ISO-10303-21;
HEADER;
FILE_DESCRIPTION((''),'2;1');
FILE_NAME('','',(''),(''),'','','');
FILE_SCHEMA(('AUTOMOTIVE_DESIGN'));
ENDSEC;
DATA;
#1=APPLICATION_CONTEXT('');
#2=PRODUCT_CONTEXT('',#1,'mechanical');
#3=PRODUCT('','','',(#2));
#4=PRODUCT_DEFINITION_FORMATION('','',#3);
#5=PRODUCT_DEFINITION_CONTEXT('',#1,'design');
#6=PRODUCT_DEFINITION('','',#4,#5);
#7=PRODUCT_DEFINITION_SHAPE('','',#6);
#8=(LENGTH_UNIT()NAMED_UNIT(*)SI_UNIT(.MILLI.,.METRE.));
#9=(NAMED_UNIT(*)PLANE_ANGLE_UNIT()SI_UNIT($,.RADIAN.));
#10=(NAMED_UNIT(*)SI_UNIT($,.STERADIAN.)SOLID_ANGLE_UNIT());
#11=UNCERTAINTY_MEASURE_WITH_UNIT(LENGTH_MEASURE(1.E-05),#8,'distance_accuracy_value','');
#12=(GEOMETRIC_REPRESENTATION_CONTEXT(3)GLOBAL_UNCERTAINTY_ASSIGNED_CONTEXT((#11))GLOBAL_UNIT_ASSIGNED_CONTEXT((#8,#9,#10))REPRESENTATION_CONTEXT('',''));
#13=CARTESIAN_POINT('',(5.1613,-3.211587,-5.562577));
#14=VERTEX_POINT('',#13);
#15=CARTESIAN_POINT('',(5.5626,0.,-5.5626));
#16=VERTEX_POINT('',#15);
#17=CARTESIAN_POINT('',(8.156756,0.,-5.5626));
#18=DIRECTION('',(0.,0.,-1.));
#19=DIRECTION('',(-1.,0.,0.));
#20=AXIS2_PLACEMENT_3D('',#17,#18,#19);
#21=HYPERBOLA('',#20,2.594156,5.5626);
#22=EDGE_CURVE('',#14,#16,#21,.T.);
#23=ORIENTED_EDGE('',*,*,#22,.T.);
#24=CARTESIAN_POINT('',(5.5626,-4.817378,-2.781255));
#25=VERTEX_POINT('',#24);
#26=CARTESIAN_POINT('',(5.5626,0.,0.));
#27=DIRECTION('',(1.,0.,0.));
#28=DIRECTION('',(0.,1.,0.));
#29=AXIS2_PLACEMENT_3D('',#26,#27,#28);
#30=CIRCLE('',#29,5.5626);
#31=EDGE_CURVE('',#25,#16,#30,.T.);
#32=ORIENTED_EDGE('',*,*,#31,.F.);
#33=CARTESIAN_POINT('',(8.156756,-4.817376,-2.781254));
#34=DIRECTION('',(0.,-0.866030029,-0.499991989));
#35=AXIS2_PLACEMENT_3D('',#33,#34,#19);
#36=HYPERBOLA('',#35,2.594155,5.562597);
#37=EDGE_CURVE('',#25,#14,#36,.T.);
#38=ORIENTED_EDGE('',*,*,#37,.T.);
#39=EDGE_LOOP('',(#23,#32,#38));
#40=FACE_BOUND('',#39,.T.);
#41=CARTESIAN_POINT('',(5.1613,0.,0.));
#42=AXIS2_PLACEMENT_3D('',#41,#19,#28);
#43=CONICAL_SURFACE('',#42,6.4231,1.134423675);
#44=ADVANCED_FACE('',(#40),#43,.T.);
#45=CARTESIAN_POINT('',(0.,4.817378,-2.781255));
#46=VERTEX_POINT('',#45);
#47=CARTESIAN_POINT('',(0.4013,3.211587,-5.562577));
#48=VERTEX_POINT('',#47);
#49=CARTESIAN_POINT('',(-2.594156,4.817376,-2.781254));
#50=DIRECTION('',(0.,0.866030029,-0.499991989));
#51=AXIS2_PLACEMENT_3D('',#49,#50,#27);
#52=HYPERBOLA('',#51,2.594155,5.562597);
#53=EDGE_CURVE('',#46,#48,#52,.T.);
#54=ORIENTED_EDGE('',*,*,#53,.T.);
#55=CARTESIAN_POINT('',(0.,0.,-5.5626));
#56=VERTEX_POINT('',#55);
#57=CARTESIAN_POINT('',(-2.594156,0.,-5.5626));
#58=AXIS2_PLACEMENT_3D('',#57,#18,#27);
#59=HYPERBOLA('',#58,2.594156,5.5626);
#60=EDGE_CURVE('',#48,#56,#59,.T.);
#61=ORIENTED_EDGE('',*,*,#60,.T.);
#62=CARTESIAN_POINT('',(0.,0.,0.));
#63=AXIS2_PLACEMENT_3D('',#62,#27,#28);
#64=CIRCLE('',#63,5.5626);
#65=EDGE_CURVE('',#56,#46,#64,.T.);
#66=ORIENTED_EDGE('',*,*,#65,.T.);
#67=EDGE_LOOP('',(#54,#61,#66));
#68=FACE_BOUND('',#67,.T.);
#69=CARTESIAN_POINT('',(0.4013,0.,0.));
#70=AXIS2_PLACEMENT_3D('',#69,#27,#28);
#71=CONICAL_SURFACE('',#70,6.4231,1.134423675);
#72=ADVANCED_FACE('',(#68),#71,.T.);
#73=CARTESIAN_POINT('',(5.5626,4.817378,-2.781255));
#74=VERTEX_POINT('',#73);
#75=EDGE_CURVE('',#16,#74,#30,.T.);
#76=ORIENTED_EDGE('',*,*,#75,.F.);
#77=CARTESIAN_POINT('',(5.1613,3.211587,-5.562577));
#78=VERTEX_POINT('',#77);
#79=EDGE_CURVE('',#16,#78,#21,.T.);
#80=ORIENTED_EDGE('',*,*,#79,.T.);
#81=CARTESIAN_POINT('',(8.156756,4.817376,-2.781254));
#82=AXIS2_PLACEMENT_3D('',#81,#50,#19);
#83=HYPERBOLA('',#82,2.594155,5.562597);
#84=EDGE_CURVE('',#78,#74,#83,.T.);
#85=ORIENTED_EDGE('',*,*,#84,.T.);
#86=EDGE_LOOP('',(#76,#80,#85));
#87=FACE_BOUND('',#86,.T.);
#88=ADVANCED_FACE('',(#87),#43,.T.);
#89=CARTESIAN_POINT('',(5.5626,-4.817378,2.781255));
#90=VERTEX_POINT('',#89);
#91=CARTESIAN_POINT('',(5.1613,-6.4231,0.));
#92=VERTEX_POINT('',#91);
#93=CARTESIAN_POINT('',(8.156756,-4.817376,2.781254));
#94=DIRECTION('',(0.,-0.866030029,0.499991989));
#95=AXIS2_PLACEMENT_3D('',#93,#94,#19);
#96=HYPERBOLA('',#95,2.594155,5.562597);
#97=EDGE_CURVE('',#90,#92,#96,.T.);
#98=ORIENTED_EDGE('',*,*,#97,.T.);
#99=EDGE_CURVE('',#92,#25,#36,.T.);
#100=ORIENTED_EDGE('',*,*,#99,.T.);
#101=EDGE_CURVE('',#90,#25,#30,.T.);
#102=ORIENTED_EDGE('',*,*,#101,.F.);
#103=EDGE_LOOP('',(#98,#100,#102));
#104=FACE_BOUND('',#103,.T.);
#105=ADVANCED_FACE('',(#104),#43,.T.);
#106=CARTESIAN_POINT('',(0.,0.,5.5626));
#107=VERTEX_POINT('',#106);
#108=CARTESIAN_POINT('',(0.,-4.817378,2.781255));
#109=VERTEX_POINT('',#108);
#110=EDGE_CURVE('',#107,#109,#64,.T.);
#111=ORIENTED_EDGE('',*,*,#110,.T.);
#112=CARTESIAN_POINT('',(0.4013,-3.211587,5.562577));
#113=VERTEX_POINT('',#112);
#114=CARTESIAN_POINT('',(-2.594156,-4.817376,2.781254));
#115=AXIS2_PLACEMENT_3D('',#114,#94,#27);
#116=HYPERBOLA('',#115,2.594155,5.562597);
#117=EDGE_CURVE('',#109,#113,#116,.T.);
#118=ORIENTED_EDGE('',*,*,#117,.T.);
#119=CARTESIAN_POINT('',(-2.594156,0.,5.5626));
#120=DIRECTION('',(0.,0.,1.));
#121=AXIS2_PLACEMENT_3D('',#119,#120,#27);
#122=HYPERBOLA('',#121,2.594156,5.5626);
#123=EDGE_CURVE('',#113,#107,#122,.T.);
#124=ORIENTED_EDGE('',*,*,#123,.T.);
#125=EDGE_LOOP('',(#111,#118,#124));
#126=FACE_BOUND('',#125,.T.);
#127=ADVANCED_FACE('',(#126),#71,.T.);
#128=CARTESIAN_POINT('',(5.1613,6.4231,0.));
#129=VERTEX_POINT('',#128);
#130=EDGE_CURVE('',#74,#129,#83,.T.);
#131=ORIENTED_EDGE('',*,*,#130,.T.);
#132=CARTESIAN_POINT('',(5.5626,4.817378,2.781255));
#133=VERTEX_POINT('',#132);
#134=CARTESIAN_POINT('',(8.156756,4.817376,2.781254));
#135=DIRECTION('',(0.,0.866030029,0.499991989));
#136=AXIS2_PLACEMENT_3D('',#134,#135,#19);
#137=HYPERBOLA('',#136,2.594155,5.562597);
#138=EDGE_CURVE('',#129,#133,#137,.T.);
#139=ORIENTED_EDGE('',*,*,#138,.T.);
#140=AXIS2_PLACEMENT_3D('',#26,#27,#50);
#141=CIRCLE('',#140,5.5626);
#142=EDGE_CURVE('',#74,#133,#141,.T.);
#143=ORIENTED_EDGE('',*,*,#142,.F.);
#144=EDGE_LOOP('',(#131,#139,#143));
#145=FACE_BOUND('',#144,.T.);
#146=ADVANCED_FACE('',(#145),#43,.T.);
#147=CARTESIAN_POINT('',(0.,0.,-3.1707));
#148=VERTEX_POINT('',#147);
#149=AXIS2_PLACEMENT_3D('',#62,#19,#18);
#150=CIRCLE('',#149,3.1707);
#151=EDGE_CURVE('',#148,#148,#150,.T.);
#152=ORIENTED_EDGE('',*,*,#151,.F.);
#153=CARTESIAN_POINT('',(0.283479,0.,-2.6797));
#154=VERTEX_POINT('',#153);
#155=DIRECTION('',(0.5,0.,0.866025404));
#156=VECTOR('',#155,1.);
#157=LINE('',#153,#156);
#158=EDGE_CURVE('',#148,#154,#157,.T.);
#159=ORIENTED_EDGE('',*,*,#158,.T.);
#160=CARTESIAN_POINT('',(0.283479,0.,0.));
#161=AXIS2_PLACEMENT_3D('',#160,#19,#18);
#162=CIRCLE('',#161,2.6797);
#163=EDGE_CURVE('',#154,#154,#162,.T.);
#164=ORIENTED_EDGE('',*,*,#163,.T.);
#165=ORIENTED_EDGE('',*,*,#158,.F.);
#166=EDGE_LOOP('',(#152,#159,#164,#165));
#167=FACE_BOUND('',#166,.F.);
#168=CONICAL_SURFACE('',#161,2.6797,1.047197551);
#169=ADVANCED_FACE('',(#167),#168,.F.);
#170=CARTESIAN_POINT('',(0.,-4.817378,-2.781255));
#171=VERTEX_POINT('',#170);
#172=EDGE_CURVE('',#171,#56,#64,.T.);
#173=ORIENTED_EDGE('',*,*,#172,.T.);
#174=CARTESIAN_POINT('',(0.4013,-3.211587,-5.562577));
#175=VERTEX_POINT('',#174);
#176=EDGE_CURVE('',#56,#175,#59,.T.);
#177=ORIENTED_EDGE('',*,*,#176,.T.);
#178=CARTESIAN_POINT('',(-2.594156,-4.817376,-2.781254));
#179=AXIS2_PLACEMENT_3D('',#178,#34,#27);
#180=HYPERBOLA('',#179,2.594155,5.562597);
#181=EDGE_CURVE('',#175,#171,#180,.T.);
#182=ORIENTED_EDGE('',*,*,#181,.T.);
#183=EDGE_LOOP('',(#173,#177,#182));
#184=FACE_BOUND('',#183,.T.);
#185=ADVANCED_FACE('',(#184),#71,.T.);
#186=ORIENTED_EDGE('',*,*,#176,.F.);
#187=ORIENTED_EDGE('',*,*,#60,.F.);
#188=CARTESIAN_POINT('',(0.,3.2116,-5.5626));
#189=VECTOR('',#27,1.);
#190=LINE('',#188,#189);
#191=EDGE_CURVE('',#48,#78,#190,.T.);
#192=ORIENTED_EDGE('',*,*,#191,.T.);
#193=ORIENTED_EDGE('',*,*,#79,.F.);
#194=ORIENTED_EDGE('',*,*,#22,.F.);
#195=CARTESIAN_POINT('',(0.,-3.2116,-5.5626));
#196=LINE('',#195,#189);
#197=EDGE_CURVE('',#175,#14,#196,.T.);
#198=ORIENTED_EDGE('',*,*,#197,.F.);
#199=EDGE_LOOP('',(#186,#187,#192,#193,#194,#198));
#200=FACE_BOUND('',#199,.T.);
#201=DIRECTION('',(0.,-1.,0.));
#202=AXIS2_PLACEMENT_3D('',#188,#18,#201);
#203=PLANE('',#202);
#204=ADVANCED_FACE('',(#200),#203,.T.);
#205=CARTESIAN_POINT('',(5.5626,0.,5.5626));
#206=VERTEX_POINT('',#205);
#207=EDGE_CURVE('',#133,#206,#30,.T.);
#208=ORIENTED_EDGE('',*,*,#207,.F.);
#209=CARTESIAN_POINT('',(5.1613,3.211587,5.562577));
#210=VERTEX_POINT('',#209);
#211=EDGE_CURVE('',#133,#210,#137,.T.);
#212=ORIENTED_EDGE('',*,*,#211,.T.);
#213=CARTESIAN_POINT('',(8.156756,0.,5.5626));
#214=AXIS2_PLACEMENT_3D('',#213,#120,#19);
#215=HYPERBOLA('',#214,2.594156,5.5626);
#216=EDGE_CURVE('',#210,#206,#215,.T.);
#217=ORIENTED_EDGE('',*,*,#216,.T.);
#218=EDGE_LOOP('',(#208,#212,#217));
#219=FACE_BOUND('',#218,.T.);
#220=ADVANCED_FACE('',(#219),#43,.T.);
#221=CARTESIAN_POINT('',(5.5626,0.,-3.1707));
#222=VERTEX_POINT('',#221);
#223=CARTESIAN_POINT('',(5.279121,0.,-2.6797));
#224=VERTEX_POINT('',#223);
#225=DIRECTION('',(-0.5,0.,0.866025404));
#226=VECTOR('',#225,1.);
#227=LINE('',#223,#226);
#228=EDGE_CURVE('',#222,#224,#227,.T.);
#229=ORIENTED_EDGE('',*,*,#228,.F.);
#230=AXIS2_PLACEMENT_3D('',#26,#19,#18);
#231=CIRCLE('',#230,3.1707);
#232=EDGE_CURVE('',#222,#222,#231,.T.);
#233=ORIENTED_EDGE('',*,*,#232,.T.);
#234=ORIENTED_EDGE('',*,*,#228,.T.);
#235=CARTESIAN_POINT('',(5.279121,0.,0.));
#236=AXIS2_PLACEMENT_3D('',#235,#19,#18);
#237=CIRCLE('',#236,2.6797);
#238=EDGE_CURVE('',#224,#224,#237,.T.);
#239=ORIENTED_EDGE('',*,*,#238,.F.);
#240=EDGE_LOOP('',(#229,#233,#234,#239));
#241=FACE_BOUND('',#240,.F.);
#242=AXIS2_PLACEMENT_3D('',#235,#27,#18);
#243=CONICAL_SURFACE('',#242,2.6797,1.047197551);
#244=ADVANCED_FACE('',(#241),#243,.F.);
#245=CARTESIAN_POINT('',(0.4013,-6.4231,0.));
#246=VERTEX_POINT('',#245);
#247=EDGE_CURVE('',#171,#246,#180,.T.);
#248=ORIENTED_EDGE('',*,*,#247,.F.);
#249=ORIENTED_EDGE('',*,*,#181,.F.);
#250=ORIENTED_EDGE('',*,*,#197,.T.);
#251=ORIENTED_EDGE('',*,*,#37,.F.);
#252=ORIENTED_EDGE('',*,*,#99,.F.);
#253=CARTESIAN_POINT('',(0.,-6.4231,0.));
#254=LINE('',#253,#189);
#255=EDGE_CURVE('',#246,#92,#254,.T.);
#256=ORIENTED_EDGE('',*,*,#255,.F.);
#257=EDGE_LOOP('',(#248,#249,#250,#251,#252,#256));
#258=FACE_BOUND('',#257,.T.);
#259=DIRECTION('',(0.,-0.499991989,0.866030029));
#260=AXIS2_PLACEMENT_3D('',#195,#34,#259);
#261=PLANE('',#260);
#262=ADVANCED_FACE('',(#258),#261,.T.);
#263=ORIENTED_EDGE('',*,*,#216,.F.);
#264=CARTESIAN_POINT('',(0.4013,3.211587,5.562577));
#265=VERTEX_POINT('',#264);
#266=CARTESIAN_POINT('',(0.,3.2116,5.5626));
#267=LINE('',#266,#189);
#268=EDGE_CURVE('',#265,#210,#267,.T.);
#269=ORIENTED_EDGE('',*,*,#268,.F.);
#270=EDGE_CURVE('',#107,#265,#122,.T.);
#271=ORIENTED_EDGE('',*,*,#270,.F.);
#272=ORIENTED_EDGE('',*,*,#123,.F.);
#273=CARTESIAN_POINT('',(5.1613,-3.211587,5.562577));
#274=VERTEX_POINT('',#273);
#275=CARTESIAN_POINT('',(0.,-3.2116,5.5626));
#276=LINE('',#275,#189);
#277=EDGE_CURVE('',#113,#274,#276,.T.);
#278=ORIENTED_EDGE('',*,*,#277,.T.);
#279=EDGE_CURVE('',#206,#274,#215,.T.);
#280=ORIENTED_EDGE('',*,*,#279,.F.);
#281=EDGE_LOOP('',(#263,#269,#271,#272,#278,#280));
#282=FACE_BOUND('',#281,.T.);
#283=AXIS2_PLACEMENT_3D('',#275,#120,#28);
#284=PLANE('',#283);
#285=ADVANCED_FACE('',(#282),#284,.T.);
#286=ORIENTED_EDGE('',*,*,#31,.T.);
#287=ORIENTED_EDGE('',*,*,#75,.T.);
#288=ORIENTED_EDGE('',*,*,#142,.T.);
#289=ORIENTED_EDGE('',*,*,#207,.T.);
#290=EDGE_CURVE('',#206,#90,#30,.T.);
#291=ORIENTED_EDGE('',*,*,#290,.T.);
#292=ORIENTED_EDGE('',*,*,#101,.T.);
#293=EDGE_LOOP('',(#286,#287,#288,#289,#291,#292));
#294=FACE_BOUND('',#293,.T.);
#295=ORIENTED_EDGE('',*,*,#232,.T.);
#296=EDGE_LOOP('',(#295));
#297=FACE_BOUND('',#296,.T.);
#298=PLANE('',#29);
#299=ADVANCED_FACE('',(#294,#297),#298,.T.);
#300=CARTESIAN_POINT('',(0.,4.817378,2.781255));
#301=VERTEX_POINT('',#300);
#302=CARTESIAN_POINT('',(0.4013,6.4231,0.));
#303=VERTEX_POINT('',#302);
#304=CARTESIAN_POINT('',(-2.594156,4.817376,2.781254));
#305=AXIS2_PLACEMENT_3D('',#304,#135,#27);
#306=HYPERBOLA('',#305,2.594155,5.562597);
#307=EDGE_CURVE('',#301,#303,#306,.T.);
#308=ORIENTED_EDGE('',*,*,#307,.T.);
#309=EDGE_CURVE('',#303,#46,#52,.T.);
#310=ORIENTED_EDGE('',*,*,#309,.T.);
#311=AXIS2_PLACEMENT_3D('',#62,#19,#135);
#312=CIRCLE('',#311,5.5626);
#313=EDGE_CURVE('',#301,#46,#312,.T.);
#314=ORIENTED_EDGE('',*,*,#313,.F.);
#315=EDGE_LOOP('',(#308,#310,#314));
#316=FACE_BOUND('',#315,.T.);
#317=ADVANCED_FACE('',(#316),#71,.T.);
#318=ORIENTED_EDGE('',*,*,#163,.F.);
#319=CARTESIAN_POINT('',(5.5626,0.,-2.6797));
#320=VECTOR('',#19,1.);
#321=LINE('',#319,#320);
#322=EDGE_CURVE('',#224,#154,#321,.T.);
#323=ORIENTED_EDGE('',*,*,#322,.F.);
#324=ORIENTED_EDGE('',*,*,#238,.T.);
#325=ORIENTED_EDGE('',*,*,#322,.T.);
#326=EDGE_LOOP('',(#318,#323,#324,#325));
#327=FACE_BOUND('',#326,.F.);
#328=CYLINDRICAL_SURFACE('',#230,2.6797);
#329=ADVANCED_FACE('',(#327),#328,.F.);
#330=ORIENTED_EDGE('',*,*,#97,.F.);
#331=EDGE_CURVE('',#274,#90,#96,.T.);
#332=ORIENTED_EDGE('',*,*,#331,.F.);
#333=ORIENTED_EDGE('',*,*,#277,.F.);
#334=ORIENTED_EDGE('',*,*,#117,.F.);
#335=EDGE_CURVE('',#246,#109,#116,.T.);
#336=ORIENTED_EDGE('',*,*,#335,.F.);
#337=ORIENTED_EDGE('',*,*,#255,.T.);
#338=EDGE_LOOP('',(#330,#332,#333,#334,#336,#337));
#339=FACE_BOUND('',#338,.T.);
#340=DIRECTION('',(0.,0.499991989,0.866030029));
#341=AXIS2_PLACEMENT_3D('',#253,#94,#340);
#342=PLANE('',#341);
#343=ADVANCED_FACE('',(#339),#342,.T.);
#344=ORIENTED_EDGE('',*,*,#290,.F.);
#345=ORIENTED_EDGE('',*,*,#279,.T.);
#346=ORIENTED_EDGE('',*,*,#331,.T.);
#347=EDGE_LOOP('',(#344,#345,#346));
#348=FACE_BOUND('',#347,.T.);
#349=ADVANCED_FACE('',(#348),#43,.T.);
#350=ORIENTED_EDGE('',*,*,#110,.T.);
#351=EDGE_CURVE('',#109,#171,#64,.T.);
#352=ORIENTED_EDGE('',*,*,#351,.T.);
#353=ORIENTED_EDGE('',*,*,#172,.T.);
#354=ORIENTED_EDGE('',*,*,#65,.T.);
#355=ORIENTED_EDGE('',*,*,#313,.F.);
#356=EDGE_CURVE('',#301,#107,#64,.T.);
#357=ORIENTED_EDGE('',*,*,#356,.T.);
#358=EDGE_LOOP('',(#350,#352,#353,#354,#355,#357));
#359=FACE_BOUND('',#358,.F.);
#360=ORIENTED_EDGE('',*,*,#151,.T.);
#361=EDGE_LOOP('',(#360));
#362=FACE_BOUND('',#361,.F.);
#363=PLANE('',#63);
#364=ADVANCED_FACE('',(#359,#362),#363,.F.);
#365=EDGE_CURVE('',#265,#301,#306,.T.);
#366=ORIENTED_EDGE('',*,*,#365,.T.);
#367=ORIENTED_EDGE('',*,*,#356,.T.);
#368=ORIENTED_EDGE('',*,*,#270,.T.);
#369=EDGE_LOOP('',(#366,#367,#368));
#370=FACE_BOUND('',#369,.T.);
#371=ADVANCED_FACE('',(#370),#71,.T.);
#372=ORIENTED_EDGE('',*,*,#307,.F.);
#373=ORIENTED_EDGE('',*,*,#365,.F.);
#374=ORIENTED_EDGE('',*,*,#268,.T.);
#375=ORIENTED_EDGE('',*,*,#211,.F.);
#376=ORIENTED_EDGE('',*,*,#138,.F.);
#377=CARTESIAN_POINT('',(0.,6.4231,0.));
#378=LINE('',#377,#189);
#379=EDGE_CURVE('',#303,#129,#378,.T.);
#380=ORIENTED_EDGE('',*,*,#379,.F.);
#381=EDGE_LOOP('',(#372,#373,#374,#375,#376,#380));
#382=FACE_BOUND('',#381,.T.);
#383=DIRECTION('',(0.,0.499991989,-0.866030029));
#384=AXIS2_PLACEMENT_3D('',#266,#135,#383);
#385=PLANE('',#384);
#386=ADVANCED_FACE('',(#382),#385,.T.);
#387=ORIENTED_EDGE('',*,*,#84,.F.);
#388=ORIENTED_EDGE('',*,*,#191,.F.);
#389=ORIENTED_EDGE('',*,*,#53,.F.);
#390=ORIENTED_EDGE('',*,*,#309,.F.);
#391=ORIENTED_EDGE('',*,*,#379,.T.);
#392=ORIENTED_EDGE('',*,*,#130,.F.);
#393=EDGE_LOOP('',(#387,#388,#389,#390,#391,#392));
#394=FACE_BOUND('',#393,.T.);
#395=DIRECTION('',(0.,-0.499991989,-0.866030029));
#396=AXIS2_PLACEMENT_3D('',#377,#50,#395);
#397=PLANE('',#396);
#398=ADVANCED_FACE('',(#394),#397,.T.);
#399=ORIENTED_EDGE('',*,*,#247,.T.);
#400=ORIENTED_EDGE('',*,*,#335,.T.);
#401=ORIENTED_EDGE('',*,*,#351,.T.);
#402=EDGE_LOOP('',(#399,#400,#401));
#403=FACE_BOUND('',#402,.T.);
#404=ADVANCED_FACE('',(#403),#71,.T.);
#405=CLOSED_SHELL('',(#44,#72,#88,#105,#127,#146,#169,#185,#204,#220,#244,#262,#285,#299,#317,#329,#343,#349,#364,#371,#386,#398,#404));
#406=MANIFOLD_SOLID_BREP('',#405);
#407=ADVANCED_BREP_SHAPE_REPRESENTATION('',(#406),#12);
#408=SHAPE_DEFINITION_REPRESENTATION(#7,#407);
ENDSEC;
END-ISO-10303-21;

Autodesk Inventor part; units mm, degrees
ref_plane "YZ Plane" through (0, 0, 0) normal (1, 0, 0) x (0, 1, 0)
ref_plane "XZ Plane" through (0, 0, 0) normal (0, 1, 0) x (-1, 0, 0)
sketch "Sketch1" plane through (0, 0, 0) normal (1, 0, 0) x (0, 1, 0)
  line L0 (-6.4231, 0) -> (-3.2116, 5.5626)
  line L1 (-3.2116, 5.5626) -> (3.2116, 5.5626)
  line L2 (3.2116, 5.5626) -> (6.4231, 0)
  line L3 (6.4231, 0) -> (3.2116, -5.5626)
  line L4 (3.2116, -5.5626) -> (-3.2116, -5.5626)
  line L5 (-3.2116, -5.5626) -> (-6.4231, 0)
  point P0 (0, 0)
  point P1 (0, 0)
  dimension "d0" = 12.8463
extrude "Body" add sketch "Sketch1" along normal blind 5.5626
sketch "Sketch2" plane through (0, 0, 0) normal (0, 0, 1) x (1, 0, 0)
  line L0 (0, 3.2116) -> (0, 6.4231) projected
  line L1 (0, 6.4231) -> (5.5626, 6.4231) projected
  line L2 (5.5626, 3.2116) -> (5.5626, 6.4231) projected
  line L3 (-1.1125, 0) -> (6.6751, 0) projected
  line L4 (0.4013, 6.4231) -> (0, 5.5626)
  line L5 (5.1613, 6.4231) -> (5.5626, 5.5626)
  dimension "d3" = 25
  dimension "d4" = 25
  dimension "d5" = 11.1252
  dimension "d6" = 11.1252
revolve "Chamfer1" cut sketch "Sketch2" angle 360 about axis through (-10, 0, 0) along (1, 0, 0)
sketch "Sketch3" plane through (5.5626, 0, 0) normal (1, 0, 0) x (0, 0, -1)
  arc A0 (-2.7813, -4.8174) -> (2.7813, -4.8174) centre (0, 0) ccw projected
hole "Thread" at (5.5626, 0, 0) direction (-1, 0, 0) diameter 5.3594 end through all thread size "1/4-28 UNF" class "2B" standard "ANSI Unified Screw Threads"
chamfer "Chamfer2" distance 0.491 angle 30 1 edges at (5.5626, 0, 2.6797) measured on face at (5.5626, -4.5748, -0.1077)
chamfer "Chamfer3" distance 0.491 angle 30 1 edges at (0, 0, 2.6797) measured on face at (0, -4.5748, -0.1077)
ref_plane "Work Plane1" through (-12.3187, 0, 0) normal (0, -0.8660254, -0.5) x (1, 0, 0)
equation "\"d0\" = 1.1547 * SW"
equation "\"d1\" = KOH"
equation "\"d3\" = ANG1"
equation "\"d4\" = ANG2"
equation "\"d5\" = SW0"
equation "\"d6\" = SW01"
equation "\"d8\" = -0.5 * GD1 + 0.5 * NND"
equation "\"d40\" = -0.5 * GD1 + 0.5 * NND"
equation "\"d10\" = -0.5 * GD1 + 0.5 * NND"
equation "\"d41\" = -0.5 * GD1 + 0.5 * NND"
equation "\"ANG1\" = 25deg"
equation "\"ANG2\" = 25deg"
equation "\"NND\" = 6.35"
equation "\"KOH\" = 5.5626"
equation "\"SW\" = 11.1252"
equation "\"SW0\" = SW"
equation "\"SW01\" = SW"
equation "\"THREADDIA\" = 6.35"
equation "\"TOA\" = 30deg"
equation "\"E0\" = 1.155 * SW"
equation "\"GD1\" = 5.367989"
properties part number "ANSI B18.2.2 - 1/4 - 28" material "Steel, Mild"
